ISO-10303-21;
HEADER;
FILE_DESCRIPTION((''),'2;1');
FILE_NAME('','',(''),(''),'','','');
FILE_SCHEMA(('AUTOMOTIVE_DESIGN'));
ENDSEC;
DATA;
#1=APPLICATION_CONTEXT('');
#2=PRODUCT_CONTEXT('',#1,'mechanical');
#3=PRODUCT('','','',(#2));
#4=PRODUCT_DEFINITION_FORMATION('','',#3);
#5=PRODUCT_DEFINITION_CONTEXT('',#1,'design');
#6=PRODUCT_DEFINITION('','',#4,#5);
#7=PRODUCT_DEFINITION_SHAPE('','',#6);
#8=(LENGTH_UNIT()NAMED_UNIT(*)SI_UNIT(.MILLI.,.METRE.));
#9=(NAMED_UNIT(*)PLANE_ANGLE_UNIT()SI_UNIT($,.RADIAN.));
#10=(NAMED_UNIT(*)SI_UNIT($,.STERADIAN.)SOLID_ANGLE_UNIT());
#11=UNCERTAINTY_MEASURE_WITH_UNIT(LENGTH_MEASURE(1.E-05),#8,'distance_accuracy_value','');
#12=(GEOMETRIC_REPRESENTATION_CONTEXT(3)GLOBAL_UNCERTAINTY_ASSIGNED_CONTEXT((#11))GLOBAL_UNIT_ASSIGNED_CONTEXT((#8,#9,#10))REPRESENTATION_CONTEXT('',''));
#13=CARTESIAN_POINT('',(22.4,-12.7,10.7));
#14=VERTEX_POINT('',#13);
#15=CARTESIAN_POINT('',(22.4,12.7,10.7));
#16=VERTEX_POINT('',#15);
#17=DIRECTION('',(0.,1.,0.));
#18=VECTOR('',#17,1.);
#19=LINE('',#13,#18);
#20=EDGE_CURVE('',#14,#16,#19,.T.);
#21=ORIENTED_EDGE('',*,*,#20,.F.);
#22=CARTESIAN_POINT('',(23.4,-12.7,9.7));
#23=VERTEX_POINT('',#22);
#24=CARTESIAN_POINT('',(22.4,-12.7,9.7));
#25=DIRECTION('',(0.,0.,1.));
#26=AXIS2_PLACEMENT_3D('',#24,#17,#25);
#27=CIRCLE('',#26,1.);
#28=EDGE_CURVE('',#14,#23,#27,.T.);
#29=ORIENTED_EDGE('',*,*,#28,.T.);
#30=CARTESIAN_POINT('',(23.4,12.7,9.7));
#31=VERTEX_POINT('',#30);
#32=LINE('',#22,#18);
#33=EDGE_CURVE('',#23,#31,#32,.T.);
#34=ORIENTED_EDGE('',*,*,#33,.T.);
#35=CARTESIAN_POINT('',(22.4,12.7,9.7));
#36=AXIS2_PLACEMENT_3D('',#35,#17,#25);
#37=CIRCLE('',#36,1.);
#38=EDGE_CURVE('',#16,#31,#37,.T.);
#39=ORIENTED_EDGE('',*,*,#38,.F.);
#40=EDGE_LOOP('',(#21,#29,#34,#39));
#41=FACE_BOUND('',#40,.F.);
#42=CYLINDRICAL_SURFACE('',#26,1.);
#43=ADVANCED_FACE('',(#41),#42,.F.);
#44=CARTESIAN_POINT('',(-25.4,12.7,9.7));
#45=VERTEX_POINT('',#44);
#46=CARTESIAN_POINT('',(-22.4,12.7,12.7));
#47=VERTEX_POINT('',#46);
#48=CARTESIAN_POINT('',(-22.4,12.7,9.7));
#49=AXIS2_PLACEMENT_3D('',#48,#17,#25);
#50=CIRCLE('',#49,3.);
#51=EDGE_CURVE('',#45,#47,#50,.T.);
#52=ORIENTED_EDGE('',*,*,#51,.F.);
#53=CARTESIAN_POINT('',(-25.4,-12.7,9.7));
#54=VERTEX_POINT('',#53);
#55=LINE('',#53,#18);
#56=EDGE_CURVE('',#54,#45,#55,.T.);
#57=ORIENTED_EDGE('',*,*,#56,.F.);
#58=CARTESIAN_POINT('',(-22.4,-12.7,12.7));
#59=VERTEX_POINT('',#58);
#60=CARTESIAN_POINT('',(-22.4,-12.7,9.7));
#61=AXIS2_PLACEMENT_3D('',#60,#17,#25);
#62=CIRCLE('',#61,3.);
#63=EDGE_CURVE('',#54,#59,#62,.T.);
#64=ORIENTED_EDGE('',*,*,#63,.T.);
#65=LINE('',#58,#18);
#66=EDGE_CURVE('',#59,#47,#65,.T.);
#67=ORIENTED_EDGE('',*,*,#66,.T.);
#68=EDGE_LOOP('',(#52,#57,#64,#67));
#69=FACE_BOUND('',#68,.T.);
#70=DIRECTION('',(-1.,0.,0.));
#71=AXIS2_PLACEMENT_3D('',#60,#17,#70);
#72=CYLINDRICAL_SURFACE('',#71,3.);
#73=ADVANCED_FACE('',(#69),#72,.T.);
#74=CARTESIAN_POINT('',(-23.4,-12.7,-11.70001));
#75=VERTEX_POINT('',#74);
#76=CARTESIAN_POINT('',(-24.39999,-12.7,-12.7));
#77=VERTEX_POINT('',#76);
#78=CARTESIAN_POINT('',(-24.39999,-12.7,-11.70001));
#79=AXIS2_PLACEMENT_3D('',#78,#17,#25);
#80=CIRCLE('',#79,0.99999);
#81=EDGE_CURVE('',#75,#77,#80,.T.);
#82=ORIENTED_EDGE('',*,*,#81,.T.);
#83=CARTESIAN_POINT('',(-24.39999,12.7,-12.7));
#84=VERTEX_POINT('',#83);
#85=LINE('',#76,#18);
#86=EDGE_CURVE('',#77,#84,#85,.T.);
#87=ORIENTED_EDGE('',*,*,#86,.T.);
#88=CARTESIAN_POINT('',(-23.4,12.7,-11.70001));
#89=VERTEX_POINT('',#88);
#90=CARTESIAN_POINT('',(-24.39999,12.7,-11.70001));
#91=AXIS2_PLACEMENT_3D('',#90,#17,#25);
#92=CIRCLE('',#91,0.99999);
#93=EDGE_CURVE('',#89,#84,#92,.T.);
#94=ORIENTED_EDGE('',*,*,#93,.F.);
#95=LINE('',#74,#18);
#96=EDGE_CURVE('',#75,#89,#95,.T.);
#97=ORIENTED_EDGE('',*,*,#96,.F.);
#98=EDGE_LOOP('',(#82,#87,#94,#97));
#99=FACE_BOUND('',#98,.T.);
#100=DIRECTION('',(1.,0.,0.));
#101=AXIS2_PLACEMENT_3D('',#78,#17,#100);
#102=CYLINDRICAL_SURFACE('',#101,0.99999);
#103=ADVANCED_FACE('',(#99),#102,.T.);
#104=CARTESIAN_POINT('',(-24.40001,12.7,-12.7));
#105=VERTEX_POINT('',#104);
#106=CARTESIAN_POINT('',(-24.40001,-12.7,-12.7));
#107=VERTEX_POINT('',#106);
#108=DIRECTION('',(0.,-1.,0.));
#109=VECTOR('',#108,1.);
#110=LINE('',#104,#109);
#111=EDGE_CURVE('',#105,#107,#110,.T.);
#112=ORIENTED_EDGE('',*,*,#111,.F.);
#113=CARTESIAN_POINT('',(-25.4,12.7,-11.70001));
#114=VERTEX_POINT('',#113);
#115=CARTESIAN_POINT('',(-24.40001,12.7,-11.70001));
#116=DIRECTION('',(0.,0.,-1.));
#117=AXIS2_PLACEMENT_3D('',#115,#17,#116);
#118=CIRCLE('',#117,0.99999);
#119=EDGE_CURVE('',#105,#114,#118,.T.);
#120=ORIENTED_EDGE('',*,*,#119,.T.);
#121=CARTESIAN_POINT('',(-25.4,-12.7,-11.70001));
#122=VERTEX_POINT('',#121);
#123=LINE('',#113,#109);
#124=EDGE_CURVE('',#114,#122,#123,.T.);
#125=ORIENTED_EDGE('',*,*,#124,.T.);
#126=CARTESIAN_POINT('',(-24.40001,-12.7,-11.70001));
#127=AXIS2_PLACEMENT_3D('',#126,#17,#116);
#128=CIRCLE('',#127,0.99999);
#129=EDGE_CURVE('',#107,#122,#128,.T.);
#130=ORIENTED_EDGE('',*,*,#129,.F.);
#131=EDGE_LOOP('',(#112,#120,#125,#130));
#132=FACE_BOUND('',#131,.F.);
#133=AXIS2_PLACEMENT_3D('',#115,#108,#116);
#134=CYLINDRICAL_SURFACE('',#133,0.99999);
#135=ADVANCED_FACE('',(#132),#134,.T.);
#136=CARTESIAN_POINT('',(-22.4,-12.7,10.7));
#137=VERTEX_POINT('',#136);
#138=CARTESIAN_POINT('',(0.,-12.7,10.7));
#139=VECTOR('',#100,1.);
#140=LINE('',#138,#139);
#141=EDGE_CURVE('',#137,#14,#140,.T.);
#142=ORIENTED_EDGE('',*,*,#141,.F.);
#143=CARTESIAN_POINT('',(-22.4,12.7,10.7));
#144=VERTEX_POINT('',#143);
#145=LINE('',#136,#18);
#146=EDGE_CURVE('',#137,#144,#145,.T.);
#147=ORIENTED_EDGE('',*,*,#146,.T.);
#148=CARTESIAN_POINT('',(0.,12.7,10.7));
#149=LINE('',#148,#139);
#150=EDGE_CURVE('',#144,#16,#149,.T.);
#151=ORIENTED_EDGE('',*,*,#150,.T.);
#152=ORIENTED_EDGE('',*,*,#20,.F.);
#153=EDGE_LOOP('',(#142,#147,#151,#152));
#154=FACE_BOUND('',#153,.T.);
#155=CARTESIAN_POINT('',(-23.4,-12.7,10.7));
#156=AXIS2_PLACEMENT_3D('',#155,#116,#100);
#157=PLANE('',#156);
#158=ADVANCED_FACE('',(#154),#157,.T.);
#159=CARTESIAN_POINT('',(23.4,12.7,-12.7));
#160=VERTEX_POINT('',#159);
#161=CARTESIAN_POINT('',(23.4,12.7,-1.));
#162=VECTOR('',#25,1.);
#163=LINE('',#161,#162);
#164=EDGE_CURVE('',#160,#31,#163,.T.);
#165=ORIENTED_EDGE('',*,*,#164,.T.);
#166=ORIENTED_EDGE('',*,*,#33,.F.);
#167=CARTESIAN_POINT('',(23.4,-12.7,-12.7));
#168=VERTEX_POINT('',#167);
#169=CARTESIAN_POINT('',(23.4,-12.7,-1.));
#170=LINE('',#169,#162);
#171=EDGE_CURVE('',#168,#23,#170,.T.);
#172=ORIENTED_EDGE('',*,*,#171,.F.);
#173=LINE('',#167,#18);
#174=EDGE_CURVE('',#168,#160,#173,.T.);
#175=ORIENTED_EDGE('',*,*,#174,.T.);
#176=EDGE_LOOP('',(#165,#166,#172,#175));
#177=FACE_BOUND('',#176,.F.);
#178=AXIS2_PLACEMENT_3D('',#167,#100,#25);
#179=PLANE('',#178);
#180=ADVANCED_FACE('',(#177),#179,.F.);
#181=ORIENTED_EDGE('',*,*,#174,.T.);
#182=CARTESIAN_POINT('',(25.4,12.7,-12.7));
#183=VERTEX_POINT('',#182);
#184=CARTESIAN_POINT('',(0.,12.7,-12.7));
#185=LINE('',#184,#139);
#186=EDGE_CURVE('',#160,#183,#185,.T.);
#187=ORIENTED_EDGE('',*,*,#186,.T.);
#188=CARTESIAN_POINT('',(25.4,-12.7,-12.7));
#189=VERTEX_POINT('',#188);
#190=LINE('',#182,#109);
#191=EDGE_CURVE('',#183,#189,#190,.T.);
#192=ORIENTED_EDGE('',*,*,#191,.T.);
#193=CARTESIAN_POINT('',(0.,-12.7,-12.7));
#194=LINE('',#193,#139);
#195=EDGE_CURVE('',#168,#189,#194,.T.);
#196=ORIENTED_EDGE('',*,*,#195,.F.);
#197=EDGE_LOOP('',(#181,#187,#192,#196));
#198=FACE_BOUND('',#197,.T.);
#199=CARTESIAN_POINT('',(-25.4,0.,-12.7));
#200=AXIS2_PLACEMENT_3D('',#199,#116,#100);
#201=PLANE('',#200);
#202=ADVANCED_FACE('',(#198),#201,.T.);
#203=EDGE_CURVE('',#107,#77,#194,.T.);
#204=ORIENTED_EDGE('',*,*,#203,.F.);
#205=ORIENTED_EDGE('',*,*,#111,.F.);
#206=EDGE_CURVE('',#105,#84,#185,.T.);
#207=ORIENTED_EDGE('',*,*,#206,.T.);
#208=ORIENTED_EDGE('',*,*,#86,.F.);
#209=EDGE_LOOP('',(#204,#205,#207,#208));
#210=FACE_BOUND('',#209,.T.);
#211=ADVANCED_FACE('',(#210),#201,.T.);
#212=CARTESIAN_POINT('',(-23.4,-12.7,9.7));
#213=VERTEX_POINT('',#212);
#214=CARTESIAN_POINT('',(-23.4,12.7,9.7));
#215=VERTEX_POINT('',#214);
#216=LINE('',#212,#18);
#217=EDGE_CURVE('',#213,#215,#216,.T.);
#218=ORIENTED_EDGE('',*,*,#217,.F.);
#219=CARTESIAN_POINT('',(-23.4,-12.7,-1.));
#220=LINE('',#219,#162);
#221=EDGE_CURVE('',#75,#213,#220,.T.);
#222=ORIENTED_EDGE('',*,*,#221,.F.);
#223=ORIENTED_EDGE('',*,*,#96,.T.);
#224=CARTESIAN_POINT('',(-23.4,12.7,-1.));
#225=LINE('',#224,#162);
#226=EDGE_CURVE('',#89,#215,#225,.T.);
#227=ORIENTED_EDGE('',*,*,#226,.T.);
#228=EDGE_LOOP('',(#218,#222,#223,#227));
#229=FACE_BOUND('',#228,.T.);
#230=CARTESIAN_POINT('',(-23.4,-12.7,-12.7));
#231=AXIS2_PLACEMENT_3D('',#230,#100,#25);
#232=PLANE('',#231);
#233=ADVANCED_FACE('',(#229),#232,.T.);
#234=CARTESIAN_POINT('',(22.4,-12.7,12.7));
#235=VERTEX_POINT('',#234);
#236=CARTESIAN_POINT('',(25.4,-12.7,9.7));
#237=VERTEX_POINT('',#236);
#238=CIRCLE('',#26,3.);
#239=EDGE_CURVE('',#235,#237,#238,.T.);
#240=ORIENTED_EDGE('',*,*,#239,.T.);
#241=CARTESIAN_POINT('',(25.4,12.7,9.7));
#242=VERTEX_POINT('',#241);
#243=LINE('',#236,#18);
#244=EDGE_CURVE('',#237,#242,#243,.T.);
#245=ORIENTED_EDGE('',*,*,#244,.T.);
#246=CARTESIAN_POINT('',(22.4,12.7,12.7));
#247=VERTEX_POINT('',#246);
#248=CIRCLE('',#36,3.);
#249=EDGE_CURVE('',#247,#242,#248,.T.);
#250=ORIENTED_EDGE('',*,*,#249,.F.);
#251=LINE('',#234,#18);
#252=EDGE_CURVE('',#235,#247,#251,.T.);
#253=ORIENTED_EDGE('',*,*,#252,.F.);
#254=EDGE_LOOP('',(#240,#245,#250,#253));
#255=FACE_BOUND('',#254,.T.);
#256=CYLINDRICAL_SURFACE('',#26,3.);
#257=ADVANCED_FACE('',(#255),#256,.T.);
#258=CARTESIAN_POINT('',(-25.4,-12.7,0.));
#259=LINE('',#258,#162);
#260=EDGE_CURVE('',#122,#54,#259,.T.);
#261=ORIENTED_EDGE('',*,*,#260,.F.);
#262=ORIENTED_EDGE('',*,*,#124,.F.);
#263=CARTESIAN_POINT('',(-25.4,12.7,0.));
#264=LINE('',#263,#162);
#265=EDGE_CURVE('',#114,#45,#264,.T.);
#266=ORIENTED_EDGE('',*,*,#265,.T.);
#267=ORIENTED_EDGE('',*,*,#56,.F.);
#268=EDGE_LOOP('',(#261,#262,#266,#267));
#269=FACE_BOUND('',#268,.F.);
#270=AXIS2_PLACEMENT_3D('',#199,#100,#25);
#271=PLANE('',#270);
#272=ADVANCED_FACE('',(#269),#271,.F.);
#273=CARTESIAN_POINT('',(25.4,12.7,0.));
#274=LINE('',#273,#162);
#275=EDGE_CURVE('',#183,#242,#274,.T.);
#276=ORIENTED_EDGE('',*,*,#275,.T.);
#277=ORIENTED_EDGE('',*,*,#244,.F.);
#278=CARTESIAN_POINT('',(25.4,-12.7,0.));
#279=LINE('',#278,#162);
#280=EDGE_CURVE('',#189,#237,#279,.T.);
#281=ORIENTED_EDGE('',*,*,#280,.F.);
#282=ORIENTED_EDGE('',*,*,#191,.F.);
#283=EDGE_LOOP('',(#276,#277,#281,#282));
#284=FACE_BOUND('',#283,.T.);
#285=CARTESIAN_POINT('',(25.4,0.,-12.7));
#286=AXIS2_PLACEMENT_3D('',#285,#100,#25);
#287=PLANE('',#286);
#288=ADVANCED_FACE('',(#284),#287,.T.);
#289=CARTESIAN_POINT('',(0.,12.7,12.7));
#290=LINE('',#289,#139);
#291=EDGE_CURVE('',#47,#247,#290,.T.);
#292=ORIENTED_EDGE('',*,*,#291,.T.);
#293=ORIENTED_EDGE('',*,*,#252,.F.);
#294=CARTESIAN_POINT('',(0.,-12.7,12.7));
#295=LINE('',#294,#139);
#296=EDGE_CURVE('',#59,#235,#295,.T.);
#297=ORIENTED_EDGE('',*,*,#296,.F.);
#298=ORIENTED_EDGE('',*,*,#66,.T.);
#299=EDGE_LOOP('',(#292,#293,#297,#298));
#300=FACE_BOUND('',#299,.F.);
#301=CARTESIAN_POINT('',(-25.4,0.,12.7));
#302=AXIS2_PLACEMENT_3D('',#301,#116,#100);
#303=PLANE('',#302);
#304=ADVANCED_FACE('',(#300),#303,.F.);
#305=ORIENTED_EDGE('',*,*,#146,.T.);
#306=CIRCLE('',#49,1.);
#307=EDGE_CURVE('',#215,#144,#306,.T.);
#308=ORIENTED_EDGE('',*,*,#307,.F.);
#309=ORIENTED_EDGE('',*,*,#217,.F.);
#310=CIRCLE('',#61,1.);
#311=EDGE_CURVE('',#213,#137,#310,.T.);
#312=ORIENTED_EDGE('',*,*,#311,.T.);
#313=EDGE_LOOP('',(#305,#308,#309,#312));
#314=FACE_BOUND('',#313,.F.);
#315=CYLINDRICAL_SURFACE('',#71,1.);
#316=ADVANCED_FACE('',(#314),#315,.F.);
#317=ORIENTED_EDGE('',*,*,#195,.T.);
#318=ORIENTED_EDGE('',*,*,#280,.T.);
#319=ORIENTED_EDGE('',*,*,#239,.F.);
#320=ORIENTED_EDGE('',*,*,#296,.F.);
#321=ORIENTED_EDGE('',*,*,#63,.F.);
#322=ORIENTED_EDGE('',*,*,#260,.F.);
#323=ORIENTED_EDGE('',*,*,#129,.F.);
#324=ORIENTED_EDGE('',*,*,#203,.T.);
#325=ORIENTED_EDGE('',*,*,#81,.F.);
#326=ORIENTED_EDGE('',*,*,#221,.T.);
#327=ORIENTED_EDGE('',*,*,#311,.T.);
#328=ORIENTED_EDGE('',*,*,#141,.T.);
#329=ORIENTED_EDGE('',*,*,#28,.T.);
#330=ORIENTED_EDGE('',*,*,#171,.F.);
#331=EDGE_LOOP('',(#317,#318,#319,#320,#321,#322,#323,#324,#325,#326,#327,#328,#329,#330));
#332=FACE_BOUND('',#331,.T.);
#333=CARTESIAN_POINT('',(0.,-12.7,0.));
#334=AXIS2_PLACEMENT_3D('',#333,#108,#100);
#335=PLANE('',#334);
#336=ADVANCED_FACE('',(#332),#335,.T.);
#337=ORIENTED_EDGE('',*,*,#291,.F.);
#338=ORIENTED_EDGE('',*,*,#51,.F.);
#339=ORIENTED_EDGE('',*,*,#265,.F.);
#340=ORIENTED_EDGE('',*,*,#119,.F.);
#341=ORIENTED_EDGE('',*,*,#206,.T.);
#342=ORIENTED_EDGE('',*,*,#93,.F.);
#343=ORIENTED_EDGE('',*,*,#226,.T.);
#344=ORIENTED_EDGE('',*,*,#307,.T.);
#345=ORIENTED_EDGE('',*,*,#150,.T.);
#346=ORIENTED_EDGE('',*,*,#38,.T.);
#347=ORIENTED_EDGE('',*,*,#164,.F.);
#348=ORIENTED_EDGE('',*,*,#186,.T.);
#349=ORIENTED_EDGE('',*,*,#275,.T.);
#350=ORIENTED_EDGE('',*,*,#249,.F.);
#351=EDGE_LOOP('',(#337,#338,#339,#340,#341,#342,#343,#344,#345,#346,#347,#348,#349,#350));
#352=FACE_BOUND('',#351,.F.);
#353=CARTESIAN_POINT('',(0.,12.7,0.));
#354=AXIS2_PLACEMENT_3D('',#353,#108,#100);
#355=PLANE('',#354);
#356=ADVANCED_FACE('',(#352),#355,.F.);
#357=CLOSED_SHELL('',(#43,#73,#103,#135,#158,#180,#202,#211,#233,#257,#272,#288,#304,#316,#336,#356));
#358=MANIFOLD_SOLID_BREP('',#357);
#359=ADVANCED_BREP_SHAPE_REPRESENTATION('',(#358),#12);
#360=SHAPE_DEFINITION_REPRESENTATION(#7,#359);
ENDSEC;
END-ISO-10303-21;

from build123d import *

# Parameters (mm, degrees)
F0_W     = 50.8
F0_H     = 25.4
F1_DEPTH = 12.7
F2_W     = 46.8
F2_H     = 23.4
F3_DEPTH = 25.4
F4_R     = 3
F5_R     = 1
F6_R     = 0.99999


# Not quite as in the source:
# - a fillet or chamfer is up to 0.001 mm smaller than in the source, because OpenCascade refuses the exact size


with BuildPart() as f1:
    # F0 (on Front) → F1 (new body, symmetric)
    with BuildSketch(Plane.XZ):
        Rectangle(F0_W, F0_H)
    extrude(amount=F1_DEPTH, both=True)

    # F2 (on face) → F3 (cut, through all)
    with BuildSketch(Plane.XZ.offset(12.7)):
        with Locations((0, -1)):
            Rectangle(F2_W, F2_H)
    extrude(amount=-F3_DEPTH, mode=Mode.SUBTRACT)

    # F4
    f4_edges = [f1.edges().sort_by_distance(p)[0] for p in [
        (-25.4, 0, 12.7),
        (25.4, 0, 12.7),
    ]]
    fillet(f4_edges, radius=F4_R)

    # F5
    f5_edges = [f1.edges().sort_by_distance(p)[0] for p in [
        (-23.4, 0, 10.7),
        (23.4, 0, 10.7),
    ]]
    fillet(f5_edges, radius=F5_R)

    # F6 (radius 1 in the source; OpenCascade refuses exactly that, so slightly less here)
    f6_edges = [f1.edges().sort_by_distance(p)[0] for p in [
        (-25.4, 0, -12.7),
        (-23.4, 0, -12.7),
    ]]
    fillet(f6_edges, radius=F6_R)


solid = f1.part
